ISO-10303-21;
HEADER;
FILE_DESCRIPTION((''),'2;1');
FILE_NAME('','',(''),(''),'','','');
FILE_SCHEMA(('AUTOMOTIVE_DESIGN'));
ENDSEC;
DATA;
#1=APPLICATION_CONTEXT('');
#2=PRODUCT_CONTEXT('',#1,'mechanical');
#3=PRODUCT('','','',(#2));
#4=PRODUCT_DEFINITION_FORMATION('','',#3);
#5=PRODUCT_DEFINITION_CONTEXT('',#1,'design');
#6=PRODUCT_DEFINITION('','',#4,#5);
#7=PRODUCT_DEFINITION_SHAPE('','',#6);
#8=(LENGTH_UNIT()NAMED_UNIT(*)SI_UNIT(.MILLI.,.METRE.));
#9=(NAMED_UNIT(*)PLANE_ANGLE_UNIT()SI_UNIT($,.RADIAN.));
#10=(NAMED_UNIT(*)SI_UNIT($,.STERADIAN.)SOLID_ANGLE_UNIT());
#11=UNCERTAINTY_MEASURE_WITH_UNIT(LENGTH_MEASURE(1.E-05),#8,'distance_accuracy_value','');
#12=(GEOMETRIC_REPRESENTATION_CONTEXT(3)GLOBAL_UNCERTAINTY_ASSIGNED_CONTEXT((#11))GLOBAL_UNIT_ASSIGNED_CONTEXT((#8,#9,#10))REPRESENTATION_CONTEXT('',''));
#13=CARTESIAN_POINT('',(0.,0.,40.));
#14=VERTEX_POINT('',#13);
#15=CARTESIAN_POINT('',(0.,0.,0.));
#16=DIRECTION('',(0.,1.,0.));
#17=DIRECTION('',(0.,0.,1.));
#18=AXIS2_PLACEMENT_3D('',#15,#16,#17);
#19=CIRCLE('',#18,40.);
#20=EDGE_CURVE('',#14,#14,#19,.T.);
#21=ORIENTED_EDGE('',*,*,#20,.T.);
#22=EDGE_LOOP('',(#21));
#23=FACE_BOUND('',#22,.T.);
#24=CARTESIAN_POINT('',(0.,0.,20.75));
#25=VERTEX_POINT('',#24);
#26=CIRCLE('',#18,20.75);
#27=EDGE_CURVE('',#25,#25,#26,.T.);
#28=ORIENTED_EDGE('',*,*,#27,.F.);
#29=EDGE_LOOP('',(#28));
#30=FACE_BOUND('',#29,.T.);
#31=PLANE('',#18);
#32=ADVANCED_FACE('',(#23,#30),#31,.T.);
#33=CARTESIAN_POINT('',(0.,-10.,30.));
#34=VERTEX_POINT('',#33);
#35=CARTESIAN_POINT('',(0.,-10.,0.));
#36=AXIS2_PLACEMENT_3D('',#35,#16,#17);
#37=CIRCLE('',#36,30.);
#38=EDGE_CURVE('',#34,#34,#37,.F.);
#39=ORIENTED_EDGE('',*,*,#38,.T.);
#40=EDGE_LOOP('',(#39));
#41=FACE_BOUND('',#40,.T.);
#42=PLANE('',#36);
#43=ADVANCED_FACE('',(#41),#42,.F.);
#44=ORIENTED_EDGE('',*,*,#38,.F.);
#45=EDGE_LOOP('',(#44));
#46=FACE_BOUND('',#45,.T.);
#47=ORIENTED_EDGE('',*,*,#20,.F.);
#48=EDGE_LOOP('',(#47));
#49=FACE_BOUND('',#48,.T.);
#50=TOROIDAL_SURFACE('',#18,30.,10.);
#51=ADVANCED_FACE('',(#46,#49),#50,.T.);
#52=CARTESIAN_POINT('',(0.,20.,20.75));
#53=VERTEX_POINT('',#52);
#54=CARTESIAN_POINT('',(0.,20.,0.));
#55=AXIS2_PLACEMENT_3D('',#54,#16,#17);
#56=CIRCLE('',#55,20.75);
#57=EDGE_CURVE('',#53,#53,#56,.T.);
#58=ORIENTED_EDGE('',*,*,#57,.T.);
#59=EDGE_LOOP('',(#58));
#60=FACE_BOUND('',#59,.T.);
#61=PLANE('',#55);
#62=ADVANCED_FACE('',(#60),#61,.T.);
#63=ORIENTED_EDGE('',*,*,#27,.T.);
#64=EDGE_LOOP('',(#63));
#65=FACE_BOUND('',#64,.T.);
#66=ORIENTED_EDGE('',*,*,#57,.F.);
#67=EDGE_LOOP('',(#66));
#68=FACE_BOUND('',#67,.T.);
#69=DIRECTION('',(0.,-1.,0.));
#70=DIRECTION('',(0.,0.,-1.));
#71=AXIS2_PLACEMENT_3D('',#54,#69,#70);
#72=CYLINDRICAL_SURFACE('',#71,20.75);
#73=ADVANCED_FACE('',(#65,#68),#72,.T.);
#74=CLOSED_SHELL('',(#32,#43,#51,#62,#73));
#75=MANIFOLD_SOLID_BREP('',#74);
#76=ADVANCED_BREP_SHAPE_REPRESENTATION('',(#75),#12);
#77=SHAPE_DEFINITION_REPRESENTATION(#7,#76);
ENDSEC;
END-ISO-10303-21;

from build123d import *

# Parameters (mm, degrees)
BASE_R              = 40
BOSS_EXTRUDE1_DEPTH = 10
STOPPER_R           = 20.75
BOSS_EXTRUDE2_DEPTH = 20
FILLET1_R           = 10


with BuildPart() as part:
    # base → Boss-Extrude1 (new body)
    with BuildSketch(Plane(origin=(0, 0, 0), x_dir=(1, 0, 0), z_dir=(0, 1, 0))):
        with Locations(Location((0, 0, 0), (0, 0, 270))):
            Circle(BASE_R)
    extrude(amount=-BOSS_EXTRUDE1_DEPTH)

    # stopper → Boss-Extrude2 (add)
    with BuildSketch(Plane(origin=(0, 0, 0), x_dir=(1, 0, 0), z_dir=(0, 1, 0))):
        with Locations(Location((0, 0, 0), (0, 0, 270))):
            Circle(STOPPER_R)
    extrude(amount=BOSS_EXTRUDE2_DEPTH)

    # Fillet1
    fillet1_edges = [part.edges().sort_by_distance(p)[0] for p in [
        (0, -10, -40),
    ]]
    fillet(fillet1_edges, radius=FILLET1_R - 0.0001)  # a hair under: the kernel refuses the full size


solid = part.part
